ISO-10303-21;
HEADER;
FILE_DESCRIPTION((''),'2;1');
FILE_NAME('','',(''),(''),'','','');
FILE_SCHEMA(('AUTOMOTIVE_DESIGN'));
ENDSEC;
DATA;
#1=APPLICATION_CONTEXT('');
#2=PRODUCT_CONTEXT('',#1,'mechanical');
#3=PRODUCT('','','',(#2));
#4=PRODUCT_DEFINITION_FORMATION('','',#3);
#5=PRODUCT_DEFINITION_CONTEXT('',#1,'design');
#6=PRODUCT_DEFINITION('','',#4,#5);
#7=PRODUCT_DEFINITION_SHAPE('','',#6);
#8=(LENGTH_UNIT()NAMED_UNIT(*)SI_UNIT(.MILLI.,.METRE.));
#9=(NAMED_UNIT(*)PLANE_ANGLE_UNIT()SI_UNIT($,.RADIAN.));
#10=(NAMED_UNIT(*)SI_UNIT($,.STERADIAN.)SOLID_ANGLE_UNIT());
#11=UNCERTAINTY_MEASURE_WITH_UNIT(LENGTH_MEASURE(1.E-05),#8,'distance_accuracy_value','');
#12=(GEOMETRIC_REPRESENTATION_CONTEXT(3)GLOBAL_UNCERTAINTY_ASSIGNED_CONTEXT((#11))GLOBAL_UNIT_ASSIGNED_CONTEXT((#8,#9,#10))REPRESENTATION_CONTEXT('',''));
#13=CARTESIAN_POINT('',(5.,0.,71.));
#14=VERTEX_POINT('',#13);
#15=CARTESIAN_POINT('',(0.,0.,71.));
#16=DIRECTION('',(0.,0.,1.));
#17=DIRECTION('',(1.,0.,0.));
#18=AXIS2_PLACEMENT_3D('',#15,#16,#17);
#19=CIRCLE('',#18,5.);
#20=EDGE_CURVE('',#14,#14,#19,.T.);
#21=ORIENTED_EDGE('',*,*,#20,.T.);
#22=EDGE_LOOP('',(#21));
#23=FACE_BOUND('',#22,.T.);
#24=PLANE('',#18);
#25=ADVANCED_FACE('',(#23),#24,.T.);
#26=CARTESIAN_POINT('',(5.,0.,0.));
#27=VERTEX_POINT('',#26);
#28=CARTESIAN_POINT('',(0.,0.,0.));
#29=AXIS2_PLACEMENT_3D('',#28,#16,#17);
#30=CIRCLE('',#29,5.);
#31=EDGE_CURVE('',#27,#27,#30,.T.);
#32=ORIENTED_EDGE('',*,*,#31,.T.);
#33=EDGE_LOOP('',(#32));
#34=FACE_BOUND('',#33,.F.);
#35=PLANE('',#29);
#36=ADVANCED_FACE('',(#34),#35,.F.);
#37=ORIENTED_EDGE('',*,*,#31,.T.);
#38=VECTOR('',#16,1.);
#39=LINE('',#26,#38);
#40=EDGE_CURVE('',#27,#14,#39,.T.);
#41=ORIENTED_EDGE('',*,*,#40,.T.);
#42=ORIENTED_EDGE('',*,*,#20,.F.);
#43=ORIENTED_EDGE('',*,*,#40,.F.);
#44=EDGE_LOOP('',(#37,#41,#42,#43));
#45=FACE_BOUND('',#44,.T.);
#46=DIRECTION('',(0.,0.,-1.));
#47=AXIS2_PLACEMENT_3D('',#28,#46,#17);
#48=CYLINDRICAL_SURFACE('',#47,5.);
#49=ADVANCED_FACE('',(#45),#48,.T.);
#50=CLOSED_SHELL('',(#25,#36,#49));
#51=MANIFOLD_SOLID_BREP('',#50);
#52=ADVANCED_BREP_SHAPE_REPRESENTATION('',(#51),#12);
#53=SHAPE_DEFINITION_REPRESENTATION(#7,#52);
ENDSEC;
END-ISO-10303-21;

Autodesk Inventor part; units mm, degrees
ref_plane "YZ Plane" through (0, 0, 0) normal (1, 0, 0) x (0, 1, 0)
ref_plane "XZ Plane" through (0, 0, 0) normal (0, 1, 0) x (-1, 0, 0)
ref_plane "XY Plane" through (0, 0, 0) normal (0, 0, 1) x (1, 0, 0)
sketch "Sketch1" plane through (0, 0, 0) normal (0, 0, 1) x (1, 0, 0)
  circle A0 centre (0, 0) radius 5
  dimension "d0" = 10
extrude "Extrusion1" add sketch "Sketch1" along normal blind 71
thread "Thread1" size "M10x1.5" class "6g" standard "ANSI Metric M Profile" length 5
thread "Thread2" size "M10x1.5" class "6g" standard "ANSI Metric M Profile" length 5
properties part number "ROLLER SHAFT"
